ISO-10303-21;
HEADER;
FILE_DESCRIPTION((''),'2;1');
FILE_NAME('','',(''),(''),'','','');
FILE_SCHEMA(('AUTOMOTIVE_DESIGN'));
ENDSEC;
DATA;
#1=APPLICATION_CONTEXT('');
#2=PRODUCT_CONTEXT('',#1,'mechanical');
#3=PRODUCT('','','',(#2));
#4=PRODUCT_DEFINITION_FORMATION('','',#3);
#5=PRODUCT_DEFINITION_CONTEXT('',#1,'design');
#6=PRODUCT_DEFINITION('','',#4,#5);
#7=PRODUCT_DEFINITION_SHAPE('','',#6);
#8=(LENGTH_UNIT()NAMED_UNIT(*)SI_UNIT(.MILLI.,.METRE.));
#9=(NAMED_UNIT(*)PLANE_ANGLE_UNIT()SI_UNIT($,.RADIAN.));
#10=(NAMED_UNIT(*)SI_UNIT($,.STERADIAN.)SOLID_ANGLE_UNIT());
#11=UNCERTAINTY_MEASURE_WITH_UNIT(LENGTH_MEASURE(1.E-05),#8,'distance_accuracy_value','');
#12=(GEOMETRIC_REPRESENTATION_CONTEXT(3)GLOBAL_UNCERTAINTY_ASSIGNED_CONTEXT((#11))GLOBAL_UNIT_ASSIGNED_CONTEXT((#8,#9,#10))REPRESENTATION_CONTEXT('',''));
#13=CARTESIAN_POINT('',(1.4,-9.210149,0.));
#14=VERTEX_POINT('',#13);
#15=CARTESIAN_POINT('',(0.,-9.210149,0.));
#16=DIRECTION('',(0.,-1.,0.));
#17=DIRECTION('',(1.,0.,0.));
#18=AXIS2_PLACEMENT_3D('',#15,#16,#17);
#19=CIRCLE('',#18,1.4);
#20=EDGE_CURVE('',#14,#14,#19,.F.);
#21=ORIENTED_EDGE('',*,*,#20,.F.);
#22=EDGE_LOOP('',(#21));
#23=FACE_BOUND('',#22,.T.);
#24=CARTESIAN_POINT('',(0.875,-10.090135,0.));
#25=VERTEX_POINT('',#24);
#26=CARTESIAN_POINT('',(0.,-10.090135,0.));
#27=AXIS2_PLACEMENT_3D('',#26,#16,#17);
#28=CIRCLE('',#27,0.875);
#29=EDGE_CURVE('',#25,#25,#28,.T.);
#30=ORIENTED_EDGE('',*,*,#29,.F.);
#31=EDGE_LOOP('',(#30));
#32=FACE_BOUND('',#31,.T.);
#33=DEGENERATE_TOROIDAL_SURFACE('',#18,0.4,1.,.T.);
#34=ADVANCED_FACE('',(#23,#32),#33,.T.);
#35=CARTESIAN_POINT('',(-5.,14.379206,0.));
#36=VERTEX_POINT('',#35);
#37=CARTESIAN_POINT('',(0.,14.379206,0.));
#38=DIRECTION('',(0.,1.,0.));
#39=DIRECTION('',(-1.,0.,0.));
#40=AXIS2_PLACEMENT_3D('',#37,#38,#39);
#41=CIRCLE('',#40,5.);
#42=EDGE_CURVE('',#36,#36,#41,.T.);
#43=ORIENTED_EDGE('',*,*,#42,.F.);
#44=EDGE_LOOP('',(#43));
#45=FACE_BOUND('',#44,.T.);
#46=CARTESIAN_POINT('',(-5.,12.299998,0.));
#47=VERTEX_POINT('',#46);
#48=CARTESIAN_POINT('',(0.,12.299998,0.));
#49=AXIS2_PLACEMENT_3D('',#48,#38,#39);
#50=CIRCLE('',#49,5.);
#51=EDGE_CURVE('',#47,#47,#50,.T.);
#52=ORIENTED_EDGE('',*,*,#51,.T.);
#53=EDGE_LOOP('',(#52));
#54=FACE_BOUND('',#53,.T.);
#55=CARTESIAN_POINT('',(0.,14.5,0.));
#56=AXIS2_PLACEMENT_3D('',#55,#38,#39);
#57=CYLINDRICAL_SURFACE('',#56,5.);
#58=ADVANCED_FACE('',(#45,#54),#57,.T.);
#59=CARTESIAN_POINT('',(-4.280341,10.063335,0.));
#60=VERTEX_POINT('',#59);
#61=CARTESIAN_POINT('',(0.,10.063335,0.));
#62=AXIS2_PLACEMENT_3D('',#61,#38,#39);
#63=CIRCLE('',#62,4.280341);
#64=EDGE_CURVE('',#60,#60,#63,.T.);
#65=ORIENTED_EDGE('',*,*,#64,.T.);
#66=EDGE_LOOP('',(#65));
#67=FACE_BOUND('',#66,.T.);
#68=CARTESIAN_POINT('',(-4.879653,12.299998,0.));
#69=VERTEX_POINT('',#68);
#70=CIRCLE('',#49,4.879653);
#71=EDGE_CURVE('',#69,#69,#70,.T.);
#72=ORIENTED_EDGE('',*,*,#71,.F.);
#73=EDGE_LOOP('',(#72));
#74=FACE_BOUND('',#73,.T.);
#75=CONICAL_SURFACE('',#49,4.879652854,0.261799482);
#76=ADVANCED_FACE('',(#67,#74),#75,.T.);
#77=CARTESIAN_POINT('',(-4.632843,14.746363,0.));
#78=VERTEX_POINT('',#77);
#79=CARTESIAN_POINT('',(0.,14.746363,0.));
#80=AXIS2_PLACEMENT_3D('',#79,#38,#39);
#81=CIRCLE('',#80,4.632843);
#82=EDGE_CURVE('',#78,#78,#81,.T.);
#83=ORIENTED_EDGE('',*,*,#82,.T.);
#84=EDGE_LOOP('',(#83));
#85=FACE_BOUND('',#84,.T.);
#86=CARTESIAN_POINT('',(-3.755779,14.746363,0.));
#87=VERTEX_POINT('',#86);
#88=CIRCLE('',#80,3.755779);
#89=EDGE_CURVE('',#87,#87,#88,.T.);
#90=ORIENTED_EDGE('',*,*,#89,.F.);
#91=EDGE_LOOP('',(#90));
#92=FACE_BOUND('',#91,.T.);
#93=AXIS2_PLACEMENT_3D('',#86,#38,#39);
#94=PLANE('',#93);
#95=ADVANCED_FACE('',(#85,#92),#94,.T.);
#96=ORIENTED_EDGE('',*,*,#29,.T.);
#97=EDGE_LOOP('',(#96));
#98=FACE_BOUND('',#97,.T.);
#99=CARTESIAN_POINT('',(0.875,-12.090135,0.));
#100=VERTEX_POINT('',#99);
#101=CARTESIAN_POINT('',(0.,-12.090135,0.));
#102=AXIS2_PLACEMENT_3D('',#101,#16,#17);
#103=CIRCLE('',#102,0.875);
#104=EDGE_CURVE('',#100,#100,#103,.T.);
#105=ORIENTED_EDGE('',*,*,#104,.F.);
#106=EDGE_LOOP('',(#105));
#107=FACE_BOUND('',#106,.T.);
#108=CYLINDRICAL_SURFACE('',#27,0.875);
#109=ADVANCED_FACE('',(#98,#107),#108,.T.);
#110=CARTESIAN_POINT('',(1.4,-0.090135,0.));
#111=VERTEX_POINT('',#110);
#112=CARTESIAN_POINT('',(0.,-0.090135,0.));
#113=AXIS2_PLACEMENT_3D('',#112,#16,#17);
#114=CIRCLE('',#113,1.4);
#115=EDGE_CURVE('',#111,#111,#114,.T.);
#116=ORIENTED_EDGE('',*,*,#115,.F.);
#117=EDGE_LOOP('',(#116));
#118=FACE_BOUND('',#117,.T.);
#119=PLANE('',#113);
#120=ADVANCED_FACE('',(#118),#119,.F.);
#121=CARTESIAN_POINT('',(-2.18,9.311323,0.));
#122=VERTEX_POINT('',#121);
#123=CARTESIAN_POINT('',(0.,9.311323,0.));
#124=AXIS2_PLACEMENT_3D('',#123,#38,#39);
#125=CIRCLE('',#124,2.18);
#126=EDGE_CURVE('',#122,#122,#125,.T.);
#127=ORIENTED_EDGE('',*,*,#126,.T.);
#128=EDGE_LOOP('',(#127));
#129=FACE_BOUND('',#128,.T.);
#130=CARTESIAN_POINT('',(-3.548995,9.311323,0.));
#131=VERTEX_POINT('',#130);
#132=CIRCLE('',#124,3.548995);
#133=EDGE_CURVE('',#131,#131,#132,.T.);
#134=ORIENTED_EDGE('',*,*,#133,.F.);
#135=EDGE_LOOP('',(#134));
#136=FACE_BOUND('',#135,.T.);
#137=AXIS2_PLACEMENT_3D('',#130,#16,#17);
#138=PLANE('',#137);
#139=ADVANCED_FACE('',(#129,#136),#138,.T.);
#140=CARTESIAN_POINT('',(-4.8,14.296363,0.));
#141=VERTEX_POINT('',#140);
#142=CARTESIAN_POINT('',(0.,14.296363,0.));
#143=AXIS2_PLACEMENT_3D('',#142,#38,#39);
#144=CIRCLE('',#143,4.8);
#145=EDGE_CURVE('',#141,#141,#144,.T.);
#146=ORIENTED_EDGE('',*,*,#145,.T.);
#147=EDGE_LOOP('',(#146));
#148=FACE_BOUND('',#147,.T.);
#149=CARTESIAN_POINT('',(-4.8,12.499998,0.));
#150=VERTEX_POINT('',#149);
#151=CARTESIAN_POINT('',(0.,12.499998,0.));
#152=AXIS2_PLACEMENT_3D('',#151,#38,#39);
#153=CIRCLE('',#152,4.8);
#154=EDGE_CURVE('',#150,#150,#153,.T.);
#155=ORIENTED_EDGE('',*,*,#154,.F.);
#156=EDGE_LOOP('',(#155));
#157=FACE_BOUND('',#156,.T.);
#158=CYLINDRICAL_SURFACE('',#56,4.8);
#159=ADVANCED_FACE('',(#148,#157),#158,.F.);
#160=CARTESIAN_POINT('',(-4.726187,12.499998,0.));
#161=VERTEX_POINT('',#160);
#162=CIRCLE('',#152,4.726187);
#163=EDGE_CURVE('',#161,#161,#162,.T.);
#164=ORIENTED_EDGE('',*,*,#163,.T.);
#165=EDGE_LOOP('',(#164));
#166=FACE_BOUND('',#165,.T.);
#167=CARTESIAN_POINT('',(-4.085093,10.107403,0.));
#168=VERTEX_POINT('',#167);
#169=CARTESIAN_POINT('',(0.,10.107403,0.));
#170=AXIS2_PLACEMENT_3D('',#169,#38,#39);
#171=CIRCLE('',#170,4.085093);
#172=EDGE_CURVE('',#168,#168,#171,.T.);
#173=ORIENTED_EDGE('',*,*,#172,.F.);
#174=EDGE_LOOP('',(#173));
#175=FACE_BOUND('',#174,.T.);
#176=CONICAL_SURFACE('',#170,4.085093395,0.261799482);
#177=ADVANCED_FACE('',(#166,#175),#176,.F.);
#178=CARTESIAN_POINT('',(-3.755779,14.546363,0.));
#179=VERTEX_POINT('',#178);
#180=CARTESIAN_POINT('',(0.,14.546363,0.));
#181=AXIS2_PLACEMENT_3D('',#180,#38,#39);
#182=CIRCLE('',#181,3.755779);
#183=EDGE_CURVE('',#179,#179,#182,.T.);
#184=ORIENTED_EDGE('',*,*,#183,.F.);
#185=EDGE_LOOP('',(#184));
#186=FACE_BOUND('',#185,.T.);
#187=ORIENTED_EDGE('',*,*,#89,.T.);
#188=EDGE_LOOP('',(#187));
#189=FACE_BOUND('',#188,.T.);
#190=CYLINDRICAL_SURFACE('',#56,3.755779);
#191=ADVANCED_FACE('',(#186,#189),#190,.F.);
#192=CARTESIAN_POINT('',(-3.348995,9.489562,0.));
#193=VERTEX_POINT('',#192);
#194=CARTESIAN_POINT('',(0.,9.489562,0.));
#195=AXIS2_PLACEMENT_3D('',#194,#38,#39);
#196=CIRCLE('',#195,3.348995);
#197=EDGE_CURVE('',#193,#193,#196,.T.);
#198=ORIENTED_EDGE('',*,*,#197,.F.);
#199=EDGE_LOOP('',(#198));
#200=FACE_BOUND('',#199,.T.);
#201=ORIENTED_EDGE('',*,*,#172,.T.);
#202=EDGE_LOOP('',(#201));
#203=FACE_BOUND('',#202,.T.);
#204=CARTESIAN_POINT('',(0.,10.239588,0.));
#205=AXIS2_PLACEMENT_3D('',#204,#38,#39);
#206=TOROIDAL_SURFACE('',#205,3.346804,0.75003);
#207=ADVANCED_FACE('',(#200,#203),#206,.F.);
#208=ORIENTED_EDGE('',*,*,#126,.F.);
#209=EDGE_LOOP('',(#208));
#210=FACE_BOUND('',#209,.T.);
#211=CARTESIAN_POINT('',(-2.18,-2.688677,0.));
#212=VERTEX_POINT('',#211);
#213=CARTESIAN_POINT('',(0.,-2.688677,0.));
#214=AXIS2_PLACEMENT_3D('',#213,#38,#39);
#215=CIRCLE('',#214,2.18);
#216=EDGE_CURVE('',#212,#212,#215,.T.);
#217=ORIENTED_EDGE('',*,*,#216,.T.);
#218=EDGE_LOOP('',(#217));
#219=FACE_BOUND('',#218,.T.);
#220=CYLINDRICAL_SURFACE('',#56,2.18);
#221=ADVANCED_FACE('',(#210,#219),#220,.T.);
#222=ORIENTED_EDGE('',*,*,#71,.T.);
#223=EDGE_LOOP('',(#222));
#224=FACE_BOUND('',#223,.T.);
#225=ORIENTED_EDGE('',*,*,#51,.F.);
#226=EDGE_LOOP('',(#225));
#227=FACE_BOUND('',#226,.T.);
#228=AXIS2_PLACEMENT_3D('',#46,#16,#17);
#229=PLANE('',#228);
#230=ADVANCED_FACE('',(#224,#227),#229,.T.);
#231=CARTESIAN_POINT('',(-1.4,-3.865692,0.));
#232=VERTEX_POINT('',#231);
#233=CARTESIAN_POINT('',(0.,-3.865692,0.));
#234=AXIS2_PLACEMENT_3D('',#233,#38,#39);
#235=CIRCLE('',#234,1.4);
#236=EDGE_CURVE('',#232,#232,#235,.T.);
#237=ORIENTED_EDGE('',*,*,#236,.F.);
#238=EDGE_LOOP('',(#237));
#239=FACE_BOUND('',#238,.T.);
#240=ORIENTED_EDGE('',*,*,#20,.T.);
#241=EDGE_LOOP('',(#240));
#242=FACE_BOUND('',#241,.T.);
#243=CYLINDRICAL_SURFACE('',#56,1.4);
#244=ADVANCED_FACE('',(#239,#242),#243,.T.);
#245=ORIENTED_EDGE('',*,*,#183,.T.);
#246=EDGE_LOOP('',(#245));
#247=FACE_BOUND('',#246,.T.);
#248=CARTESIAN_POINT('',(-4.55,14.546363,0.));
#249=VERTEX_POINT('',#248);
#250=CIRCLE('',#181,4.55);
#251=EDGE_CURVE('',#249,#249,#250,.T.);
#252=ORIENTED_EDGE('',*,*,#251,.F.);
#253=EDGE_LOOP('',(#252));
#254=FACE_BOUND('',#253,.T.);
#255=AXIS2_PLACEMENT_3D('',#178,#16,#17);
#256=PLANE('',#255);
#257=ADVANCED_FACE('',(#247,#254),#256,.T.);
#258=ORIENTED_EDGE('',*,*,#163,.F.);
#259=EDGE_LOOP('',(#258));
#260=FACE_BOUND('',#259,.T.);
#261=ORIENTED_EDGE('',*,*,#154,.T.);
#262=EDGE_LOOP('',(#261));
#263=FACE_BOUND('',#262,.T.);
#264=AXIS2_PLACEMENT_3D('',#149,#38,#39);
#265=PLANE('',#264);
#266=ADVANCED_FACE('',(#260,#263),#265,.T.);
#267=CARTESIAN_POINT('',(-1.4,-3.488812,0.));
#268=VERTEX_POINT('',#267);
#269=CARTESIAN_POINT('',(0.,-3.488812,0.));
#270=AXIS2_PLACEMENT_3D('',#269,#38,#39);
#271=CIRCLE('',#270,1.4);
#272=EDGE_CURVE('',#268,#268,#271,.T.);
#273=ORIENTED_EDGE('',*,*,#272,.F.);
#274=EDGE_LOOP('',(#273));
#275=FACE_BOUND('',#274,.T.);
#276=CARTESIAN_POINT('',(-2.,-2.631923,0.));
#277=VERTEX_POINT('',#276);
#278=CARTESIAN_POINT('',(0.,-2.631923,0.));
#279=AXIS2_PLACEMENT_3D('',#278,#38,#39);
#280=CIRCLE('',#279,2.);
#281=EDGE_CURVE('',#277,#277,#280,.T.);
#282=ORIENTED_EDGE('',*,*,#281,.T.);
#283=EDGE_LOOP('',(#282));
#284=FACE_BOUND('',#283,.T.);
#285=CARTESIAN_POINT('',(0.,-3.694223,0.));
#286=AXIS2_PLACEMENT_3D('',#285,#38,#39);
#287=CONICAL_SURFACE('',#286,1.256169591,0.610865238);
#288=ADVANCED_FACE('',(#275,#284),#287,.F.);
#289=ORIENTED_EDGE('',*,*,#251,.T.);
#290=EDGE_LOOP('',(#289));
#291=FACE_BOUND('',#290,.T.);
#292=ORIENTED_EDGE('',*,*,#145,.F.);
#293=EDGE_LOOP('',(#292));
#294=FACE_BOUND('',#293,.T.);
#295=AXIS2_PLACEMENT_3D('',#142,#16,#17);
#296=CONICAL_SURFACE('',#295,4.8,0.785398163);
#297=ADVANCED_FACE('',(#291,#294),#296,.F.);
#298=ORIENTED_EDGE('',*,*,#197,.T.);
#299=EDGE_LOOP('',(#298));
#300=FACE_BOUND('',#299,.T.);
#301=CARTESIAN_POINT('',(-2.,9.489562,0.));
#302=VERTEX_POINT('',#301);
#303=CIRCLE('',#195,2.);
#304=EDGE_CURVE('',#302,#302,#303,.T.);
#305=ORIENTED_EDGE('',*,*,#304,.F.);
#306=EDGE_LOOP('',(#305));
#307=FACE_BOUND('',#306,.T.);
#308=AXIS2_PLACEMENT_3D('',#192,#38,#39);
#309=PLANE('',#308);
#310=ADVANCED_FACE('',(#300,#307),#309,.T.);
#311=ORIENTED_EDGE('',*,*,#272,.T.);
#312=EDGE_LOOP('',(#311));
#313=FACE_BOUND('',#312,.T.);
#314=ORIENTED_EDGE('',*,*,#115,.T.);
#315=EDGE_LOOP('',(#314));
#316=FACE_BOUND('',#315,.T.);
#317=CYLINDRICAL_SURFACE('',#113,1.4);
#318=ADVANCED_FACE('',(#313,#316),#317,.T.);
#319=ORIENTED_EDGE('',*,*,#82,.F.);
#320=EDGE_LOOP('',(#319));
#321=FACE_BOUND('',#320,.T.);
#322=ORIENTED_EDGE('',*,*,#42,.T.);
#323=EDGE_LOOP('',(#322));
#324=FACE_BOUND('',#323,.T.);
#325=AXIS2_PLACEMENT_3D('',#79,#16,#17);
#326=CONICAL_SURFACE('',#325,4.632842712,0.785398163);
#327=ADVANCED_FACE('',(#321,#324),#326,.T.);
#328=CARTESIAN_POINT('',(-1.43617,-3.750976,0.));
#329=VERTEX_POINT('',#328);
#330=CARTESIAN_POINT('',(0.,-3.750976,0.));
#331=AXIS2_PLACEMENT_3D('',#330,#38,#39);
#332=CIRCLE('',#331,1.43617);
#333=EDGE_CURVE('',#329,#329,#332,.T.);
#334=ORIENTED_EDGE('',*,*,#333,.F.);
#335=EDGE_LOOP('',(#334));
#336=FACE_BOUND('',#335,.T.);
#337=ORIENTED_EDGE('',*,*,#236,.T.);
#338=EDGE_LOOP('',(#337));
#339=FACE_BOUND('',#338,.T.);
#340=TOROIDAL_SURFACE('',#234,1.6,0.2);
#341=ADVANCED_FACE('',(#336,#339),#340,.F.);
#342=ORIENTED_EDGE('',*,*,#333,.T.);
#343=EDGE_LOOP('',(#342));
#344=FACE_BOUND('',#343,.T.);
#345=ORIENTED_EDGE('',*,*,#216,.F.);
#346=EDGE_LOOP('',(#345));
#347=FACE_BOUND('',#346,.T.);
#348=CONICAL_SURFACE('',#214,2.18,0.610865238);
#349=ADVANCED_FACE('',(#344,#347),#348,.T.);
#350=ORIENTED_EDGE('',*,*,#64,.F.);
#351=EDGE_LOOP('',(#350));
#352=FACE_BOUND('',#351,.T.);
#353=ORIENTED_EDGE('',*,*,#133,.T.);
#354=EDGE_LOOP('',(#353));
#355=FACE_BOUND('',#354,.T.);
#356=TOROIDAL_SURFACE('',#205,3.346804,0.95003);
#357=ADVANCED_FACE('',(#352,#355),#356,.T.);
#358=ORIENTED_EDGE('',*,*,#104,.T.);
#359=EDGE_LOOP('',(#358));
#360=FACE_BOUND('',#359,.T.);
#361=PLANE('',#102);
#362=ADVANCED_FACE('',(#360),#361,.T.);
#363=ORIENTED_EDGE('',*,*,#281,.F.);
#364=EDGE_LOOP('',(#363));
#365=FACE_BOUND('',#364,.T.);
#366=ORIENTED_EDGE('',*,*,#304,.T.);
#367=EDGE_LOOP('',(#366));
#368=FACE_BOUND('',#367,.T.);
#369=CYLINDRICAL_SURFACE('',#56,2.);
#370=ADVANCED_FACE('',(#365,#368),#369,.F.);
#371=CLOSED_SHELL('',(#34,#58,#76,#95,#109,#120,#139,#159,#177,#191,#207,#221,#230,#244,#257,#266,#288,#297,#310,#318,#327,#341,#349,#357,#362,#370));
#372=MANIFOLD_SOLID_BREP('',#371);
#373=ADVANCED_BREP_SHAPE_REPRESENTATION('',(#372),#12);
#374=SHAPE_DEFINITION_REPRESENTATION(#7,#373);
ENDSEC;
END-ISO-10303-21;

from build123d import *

# Parameters (mm, degrees)
BOSS_EXTRUDE1_DEPTH      = 7
BOSS_EXTRUDE1_DEPTH_BACK = 5
SKETCH2_R                = 1.4
SKETCH3_OUTSIDE_W        = 18.066
SKETCH3_OUTSIDE_H        = 18.066
SKETCH3_OUTSIDE_R        = 0.875
CUT_EXTRUDE1_DEPTH       = 2
FILLET1_R                = 1


with BuildPart() as part:
    # Sketch1 → Revolve2 (revolve)
    with BuildSketch(Plane.XY):
        with BuildLine():
            Line((-3.755778652, 14.546362803), (-4.55, 14.546362803))
            Line((-4.55, 14.546362803), (-4.8, 14.296362803))
            Line((-4.8, 14.296362803), (-4.8, 12.499997602))
            Line((-4.8, 12.499997602), (-4.726187471, 12.499997602))
            Line((-4.726187471, 12.499997602), (-4.085093395, 10.107402835))
            ThreePointArc((-4.085093395, 10.107402835), (-3.828996553, 9.665101687), (-3.348994918, 9.489561582))
            Line((-3.348994918, 9.489561582), (-2, 9.489561582))
            Line((-2, 9.489561582), (-2, -2.631922723))
            Line((-2, -2.631922723), (-1.256169591, -3.694222639))
            ThreePointArc((-1.256169591, -3.694222639), (-1.22925661, -3.748796766), (-1.22, -3.808937926))
            Line((-1.22, -3.808937926), (-1.22, -4.710135178))
            ThreePointArc((-1.22, -4.710135178), (-1.161421356, -4.851556534), (-1.02, -4.910135178))
            Line((-1.02, -4.910135178), (0, -4.910135178))
            Line((0, -4.910135178), (0, -5.090135178))
            Line((0, -5.090135178), (-1.2, -5.090135178))
            ThreePointArc((-1.2, -5.090135178), (-1.341421356, -5.031556534), (-1.4, -4.890135178))
            Line((-1.4, -4.890135178), (-1.4, -3.865691708))
            ThreePointArc((-1.4, -3.865691708), (-1.40925661, -3.805550548), (-1.436169591, -3.750976421))
            Line((-1.436169591, -3.750976421), (-2.18, -2.688676505))
            Line((-2.18, -2.688676505), (-2.18, 9.311323495))
            Line((-2.18, 9.311323495), (-3.548994918, 9.311323495))
            ThreePointArc((-3.548994918, 9.311323495), (-4.027869138, 9.577238986), (-4.280340775, 10.063335313))
            Line((-4.280340775, 10.063335313), (-4.879652854, 12.299997602))
            Line((-4.879652854, 12.299997602), (-5, 12.299997602))
            Line((-5, 12.299997602), (-5, 14.379205516))
            Line((-5, 14.379205516), (-4.632842712, 14.746362803))
            Line((-4.632842712, 14.746362803), (-3.755778652, 14.746362803))
            Line((-3.755778652, 14.746362803), (-3.755778652, 14.546362803))
        make_face()
    revolve(axis=Axis((0, 14.5, 0), (0, -1, 0)))

    # Sketch2 → Boss-Extrude1 (add, two sides: drawn at the far end of the back side and taken through both)
    with BuildSketch(Plane.XZ.offset(5.090135178).offset(-BOSS_EXTRUDE1_DEPTH_BACK)):
        with Locations(Location((0, 0, 0), (0, 0, 180))):
            Circle(SKETCH2_R)
    extrude(amount=BOSS_EXTRUDE1_DEPTH + BOSS_EXTRUDE1_DEPTH_BACK)

    # Sketch3 outside → Cut-Extrude1 (cut)
    with BuildSketch(Plane.XZ.offset(12.090135178)):
        Rectangle(SKETCH3_OUTSIDE_W, SKETCH3_OUTSIDE_H)
        Circle(SKETCH3_OUTSIDE_R, mode=Mode.SUBTRACT)
    extrude(amount=-CUT_EXTRUDE1_DEPTH, mode=Mode.SUBTRACT)

    # Fillet1
    # the kernel refuses this fillet: 1 mm, written as the material it takes off along each edge
    with BuildSketch(Plane(origin=(0, -10.090135178, 0), x_dir=(-1, 0, 0), z_dir=(0, 0, -1))) as fillet1_piece_1:
        with BuildLine():
            CenterArc((0.4, 0.879985795), FILLET1_R, 298.359350028, 61.640649972)
            Line((0.875, 0), (0.8845, -0.017599716))
            ThreePointArc((0.8845, -0.017599716), (1.1375, -0.02), (1.4, -0.02))
            Line((1.4, -0.02), (1.42, 0))
            Line((1.42, 0), (1.42, 0.879985795))
            Line((1.42, 0.879985795), (1.4, 0.879985795))
        make_face()
    revolve(axis=Axis((0, -10.090135178, 0), (0, 1, 0)), mode=Mode.SUBTRACT)


solid = part.part
